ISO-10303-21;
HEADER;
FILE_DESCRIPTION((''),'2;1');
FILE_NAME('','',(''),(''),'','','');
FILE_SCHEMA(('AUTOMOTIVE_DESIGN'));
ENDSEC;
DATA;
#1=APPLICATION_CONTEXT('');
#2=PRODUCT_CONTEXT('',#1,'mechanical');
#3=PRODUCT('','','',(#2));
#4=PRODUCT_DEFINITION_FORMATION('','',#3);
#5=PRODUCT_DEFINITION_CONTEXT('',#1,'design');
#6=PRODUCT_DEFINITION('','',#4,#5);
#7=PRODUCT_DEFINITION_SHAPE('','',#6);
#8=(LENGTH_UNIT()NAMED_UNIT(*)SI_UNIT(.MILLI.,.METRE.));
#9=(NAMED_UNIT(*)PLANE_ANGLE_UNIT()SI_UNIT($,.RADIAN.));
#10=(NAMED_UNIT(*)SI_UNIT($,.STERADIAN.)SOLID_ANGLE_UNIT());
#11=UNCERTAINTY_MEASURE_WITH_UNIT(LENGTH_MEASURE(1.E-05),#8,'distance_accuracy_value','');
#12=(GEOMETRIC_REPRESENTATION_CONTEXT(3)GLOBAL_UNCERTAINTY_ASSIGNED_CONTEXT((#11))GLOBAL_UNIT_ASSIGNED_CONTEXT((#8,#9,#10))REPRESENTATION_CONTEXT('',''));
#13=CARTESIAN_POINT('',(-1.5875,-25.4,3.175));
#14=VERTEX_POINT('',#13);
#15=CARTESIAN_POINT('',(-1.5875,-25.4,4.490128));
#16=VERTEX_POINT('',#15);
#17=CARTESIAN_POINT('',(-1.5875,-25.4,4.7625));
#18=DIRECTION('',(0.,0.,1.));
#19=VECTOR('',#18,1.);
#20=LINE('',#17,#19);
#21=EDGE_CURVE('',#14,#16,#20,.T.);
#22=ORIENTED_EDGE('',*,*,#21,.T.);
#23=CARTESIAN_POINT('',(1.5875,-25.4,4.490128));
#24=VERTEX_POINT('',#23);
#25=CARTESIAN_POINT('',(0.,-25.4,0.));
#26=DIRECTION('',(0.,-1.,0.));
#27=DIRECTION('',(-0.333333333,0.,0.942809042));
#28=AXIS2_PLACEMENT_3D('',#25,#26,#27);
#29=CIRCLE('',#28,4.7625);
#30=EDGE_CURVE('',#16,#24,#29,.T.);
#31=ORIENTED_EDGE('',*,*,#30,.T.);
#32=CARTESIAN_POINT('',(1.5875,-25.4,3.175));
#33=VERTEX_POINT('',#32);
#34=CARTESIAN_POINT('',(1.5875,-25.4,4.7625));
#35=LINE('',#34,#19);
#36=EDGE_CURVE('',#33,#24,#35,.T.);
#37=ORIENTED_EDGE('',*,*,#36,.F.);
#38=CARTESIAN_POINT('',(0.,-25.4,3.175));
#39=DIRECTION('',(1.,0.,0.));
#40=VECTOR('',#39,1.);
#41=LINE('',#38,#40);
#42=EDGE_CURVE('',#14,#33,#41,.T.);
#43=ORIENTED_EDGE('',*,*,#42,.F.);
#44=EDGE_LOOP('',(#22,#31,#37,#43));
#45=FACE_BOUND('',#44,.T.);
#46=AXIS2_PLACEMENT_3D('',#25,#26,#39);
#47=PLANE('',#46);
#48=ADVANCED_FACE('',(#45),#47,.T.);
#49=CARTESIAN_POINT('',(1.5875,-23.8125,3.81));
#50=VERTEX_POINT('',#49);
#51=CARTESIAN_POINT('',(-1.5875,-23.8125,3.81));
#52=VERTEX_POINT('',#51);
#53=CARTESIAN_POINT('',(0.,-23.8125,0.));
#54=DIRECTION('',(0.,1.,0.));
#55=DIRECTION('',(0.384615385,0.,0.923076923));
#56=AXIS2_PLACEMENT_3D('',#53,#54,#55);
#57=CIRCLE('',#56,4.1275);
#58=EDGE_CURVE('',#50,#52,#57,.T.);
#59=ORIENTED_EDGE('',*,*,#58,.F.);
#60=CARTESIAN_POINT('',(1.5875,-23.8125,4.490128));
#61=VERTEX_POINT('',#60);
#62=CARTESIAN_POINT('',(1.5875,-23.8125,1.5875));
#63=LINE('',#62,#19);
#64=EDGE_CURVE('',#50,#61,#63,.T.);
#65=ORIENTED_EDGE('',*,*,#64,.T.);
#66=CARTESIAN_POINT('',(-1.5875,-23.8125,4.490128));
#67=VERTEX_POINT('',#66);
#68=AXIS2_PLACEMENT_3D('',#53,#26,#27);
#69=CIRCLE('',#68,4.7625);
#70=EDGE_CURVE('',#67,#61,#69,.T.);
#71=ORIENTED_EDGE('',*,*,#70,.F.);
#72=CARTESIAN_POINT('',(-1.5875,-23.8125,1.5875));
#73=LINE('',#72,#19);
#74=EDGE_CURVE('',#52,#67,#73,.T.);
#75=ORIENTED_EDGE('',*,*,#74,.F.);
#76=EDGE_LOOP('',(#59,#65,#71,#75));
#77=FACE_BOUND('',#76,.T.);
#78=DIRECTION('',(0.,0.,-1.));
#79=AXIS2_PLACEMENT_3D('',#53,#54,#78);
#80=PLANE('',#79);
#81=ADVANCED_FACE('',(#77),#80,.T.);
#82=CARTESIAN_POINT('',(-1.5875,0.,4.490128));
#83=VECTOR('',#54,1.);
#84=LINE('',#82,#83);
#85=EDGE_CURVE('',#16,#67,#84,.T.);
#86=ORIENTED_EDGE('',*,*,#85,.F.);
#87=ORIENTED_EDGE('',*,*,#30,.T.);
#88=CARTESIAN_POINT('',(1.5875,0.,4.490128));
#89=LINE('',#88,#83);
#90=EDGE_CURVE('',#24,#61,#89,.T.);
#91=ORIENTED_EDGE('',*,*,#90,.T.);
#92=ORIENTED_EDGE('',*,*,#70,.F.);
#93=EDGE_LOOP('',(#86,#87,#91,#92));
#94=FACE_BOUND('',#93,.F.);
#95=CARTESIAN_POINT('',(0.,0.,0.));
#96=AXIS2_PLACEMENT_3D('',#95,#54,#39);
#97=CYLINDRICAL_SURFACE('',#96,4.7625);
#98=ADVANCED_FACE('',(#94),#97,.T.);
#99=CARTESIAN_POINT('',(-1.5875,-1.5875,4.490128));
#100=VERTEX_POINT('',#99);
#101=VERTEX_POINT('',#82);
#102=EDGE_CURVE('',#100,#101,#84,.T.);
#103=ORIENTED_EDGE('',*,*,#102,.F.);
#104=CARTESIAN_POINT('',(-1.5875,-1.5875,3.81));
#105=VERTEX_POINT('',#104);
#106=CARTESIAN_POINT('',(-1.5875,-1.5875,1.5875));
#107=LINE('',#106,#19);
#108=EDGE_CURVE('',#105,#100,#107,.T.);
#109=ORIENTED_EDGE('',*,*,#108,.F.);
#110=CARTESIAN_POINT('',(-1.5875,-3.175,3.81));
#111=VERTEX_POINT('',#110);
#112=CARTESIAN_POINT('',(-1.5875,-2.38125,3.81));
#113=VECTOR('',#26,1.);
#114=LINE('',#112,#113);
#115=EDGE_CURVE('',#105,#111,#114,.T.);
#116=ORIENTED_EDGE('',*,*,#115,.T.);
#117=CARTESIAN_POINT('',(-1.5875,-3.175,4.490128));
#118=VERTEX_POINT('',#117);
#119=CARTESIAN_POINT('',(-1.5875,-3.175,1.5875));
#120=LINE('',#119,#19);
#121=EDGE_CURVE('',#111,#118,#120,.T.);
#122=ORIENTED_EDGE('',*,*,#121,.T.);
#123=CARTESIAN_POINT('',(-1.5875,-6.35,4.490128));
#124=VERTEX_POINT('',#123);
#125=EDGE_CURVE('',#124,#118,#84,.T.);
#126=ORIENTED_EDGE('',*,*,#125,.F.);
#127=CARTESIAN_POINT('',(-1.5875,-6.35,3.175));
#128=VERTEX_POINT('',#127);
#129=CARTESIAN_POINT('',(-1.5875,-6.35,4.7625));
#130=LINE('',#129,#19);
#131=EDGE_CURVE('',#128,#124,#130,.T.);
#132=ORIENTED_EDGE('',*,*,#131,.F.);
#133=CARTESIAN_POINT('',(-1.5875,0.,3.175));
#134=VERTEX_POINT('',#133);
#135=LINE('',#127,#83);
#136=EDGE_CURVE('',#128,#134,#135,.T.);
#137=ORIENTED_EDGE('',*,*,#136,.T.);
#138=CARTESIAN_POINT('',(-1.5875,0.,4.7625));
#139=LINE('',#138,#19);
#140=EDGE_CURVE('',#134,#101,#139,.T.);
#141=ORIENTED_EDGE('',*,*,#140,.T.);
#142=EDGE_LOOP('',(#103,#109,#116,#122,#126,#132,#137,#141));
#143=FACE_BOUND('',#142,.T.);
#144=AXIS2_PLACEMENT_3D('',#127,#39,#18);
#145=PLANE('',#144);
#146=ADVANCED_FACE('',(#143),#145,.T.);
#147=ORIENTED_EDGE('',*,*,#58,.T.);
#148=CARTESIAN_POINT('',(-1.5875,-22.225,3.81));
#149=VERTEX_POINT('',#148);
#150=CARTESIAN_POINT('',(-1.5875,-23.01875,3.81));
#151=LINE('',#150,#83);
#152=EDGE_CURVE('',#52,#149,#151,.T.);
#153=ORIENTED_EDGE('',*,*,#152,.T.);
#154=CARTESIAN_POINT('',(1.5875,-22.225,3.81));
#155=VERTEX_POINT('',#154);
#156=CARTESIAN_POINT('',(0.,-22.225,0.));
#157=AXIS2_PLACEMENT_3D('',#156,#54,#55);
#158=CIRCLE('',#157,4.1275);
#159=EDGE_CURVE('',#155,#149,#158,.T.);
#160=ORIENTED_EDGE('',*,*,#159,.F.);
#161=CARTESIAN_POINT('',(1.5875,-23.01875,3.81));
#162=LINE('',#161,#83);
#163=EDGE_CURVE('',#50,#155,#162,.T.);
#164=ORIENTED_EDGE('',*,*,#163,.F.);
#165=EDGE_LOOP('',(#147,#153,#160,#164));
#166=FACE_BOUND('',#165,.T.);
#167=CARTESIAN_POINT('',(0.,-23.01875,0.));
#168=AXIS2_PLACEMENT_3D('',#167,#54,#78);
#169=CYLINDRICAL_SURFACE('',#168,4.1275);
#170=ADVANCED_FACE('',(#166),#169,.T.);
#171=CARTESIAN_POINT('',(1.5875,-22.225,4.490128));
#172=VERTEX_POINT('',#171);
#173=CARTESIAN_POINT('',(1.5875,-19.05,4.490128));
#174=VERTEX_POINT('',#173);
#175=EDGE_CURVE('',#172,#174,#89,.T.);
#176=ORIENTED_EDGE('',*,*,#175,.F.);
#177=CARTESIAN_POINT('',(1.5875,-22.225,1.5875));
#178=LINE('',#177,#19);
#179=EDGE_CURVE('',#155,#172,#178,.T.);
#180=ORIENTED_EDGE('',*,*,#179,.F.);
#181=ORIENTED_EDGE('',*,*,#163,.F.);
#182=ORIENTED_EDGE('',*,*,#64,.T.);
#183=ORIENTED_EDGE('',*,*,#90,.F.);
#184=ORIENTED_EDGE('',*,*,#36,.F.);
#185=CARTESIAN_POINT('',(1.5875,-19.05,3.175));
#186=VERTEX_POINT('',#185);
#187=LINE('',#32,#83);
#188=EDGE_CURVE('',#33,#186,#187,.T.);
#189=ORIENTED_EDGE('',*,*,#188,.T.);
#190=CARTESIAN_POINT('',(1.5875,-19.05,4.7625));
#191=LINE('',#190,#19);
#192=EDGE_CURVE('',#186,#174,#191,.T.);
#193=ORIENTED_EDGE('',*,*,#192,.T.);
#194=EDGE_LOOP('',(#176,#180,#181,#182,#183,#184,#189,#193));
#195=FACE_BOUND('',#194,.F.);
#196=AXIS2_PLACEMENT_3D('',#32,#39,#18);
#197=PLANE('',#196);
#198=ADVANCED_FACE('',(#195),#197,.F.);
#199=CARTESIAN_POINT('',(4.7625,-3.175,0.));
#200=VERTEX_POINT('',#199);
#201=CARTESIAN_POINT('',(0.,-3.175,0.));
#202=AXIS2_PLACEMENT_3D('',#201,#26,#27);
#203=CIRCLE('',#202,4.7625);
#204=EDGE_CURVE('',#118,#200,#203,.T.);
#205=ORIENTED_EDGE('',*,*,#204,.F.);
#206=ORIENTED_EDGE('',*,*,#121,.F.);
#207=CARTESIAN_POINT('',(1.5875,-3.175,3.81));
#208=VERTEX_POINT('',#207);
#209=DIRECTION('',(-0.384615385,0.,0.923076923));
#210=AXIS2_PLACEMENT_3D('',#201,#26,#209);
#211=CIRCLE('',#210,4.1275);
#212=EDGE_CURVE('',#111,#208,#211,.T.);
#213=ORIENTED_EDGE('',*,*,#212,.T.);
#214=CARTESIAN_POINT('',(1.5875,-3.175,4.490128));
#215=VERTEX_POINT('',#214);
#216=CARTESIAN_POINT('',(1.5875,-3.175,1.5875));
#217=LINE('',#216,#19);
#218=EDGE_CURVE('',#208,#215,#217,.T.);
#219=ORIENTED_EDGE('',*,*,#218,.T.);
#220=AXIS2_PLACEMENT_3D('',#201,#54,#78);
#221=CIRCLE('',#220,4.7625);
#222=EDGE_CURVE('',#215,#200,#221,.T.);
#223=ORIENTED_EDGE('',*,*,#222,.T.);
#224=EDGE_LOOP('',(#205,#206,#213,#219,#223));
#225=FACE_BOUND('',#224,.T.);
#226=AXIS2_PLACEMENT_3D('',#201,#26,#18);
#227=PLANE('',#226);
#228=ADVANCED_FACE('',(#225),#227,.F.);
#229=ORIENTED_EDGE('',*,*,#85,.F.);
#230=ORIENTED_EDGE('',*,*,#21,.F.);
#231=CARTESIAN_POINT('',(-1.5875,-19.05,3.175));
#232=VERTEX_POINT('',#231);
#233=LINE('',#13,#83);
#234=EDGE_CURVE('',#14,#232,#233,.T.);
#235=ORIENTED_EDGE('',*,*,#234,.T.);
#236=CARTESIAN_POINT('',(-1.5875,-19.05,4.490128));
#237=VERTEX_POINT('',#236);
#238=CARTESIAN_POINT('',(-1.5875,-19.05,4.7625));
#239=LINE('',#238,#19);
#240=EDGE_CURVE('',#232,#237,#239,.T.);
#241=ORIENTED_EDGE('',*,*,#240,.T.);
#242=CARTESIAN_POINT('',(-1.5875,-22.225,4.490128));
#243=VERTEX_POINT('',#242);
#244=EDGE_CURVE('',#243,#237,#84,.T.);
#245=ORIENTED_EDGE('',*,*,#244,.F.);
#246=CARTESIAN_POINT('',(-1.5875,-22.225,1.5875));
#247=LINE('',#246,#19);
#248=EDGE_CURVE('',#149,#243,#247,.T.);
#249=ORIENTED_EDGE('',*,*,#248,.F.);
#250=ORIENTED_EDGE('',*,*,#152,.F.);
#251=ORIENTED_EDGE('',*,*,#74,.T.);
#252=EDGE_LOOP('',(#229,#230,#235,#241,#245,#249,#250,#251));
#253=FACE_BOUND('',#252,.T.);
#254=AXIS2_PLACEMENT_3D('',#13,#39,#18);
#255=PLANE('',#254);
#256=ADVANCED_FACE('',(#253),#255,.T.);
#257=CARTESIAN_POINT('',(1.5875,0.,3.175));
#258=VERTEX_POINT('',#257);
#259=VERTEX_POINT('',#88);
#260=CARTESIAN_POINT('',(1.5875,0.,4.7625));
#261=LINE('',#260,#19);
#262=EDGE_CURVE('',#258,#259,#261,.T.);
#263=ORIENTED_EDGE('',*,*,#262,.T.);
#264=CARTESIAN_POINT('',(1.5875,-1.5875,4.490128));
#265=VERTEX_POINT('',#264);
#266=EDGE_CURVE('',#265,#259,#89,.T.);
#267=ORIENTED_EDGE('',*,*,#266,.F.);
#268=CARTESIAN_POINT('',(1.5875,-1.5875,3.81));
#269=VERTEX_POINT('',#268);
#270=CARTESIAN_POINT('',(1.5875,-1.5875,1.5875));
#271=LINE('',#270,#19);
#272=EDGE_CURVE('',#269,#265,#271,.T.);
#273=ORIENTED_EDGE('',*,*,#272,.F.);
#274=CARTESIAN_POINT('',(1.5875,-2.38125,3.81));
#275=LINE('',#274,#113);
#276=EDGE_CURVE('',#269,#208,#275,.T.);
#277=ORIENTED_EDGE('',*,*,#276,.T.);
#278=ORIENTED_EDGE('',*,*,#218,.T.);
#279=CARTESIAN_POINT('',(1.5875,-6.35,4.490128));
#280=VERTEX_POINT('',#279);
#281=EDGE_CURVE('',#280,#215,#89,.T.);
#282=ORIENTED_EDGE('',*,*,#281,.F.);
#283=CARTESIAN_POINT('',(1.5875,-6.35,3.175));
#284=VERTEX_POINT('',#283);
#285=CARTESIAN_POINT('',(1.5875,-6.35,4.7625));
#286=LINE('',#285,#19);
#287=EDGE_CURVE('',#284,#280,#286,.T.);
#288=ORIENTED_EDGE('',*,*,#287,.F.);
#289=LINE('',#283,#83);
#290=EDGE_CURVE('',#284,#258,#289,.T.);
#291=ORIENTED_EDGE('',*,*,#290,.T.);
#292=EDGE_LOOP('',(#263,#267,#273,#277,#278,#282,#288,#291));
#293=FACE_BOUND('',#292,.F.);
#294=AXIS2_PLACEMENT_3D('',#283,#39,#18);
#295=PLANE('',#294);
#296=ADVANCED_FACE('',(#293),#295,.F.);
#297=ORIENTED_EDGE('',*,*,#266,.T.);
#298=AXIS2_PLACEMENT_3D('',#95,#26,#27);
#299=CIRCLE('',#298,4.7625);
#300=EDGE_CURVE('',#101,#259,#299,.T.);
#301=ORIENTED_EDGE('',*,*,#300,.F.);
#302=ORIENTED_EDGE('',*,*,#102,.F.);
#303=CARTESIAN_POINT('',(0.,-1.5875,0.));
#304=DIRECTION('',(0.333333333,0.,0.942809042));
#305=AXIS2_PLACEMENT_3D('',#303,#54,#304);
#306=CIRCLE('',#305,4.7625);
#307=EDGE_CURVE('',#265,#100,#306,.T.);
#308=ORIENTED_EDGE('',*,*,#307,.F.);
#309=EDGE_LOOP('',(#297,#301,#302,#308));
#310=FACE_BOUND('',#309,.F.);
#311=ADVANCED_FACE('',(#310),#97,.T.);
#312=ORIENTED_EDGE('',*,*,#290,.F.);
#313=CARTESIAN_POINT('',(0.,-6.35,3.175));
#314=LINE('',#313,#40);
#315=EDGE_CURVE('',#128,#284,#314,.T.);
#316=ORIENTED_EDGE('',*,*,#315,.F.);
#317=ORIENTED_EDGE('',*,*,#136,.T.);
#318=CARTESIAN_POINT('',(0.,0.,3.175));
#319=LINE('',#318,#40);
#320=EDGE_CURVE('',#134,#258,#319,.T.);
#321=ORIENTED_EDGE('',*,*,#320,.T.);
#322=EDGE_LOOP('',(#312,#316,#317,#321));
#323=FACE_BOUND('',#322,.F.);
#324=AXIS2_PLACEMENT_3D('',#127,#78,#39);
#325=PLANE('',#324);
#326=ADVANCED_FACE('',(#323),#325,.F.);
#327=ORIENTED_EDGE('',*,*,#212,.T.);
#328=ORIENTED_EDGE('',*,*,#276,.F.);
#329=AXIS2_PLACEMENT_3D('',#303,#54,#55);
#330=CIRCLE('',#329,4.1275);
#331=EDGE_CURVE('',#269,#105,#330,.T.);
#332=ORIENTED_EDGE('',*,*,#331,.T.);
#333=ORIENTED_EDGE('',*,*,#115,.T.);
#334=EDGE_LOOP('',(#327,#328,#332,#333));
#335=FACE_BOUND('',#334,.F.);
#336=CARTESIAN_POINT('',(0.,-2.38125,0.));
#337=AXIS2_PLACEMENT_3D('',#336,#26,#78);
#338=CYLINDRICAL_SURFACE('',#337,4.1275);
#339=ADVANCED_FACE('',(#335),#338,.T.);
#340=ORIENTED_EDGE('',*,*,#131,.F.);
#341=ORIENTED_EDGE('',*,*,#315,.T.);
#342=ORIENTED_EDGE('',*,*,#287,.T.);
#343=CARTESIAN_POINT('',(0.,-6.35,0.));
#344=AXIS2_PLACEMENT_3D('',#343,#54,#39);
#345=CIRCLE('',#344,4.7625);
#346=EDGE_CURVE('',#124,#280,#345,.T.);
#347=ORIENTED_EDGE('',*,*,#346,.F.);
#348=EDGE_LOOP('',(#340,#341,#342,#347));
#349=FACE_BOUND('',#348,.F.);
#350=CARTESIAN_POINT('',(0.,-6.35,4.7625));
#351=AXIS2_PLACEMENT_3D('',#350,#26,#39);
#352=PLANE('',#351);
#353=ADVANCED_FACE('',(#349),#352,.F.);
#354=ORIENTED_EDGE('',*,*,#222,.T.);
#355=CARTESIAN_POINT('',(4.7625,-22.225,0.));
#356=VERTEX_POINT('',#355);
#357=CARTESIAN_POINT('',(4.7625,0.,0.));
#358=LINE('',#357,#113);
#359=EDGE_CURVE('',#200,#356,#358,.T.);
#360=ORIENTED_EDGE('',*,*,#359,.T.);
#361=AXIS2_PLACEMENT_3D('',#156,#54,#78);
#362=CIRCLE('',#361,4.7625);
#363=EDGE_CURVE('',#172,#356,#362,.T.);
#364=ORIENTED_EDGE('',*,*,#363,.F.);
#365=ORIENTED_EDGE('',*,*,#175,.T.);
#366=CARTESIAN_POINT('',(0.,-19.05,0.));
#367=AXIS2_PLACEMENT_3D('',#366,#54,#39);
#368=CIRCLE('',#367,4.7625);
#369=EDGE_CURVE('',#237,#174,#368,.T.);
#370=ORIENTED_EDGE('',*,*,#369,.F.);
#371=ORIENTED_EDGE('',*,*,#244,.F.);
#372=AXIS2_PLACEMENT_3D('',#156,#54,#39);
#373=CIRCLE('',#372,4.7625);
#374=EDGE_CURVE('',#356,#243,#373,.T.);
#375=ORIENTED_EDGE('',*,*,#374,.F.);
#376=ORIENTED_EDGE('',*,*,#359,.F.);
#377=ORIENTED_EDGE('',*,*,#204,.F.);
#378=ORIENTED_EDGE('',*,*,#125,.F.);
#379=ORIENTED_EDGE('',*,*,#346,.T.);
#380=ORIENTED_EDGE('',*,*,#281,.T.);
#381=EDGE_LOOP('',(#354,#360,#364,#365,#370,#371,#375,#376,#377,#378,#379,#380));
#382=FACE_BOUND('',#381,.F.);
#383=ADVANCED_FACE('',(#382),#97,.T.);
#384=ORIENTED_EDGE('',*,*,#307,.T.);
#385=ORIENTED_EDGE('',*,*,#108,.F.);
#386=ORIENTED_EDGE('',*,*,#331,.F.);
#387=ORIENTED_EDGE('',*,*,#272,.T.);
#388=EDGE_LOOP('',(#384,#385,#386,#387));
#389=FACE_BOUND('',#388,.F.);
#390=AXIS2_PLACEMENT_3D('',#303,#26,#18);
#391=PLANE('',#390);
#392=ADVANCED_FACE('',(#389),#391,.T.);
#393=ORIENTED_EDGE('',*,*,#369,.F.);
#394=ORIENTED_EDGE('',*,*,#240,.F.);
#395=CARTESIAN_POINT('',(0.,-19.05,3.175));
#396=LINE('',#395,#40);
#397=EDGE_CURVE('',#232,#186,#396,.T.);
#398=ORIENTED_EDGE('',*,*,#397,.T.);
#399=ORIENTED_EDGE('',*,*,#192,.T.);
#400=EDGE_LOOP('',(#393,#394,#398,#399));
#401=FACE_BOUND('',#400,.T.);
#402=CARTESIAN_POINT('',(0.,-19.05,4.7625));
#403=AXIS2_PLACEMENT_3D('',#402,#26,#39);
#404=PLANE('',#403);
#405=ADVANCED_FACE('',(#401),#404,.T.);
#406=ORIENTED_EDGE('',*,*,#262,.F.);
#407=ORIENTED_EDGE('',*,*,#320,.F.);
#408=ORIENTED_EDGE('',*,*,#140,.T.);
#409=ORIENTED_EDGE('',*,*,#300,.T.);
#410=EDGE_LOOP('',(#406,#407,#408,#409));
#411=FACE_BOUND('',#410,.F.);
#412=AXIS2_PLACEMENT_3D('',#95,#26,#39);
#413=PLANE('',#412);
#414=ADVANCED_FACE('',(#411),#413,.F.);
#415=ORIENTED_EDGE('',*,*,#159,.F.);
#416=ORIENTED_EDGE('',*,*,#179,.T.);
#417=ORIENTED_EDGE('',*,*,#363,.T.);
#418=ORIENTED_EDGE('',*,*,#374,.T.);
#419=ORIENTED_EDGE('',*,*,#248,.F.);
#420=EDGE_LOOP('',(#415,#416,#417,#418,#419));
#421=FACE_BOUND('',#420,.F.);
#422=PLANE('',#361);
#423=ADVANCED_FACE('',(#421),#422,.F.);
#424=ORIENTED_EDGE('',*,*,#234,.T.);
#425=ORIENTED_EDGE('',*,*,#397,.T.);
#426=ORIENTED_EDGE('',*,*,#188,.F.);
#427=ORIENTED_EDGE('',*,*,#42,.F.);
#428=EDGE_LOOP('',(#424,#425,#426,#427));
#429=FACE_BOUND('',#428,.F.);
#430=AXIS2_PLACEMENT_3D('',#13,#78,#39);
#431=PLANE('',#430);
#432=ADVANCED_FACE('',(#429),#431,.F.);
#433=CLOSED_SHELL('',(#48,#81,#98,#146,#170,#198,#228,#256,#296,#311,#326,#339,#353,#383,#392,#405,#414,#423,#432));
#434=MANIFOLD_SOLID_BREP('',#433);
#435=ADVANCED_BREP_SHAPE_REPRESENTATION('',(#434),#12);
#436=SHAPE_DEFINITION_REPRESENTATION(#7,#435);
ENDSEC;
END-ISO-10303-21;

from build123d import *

# Parameters (mm, degrees)
F0_R            = 4.7625
F1_DEPTH        = 25.4
F2_W            = 3.175
F2_H            = 3.175
F3_DEPTH        = 6.35
F3_COPIES_COUNT = 2
F3_COPIES_PITCH = 19.05
F5_W            = 1.5875
F5_H            = 0.635


# Not quite as in the source:
# - a pattern or mirror of a feature is missing from the dataset's text; its kind, count and spacing are read off the source's solid


with BuildPart() as f1:
    # F0 (on Front) → F1 (new body)
    with BuildSketch(Plane.XZ):
        Circle(F0_R)
    extrude(amount=F1_DEPTH)

    # F2 (on face) → F3 (cut)
    with BuildSketch(Plane.XZ.offset(25.4)):
        with Locations((0, 4.7625)):
            Rectangle(F2_W, F2_H)
    f3 = extrude(amount=-F3_DEPTH, mode=Mode.SUBTRACT)

    # F3_copies: F3 ×2
    with Locations(*[(0, i * F3_COPIES_PITCH, 0) for i in range(1, F3_COPIES_COUNT)]):
        add(f3, mode=Mode.SUBTRACT)

    # F5 (on Right) → F6 (revolve, cut)
    with BuildSketch(Plane.YZ):
        with Locations((-23.01875, -4.445)):
            Rectangle(F5_W, F5_H)
    f6 = revolve(axis=Axis((0, -12.6913171262, 0), (0, 1, 0)), mode=Mode.SUBTRACT)

    # F6_copies: F6 across plane
    add(f6.mirror(Plane.ZX.offset(-12.7)), mode=Mode.SUBTRACT)


solid = f1.part
